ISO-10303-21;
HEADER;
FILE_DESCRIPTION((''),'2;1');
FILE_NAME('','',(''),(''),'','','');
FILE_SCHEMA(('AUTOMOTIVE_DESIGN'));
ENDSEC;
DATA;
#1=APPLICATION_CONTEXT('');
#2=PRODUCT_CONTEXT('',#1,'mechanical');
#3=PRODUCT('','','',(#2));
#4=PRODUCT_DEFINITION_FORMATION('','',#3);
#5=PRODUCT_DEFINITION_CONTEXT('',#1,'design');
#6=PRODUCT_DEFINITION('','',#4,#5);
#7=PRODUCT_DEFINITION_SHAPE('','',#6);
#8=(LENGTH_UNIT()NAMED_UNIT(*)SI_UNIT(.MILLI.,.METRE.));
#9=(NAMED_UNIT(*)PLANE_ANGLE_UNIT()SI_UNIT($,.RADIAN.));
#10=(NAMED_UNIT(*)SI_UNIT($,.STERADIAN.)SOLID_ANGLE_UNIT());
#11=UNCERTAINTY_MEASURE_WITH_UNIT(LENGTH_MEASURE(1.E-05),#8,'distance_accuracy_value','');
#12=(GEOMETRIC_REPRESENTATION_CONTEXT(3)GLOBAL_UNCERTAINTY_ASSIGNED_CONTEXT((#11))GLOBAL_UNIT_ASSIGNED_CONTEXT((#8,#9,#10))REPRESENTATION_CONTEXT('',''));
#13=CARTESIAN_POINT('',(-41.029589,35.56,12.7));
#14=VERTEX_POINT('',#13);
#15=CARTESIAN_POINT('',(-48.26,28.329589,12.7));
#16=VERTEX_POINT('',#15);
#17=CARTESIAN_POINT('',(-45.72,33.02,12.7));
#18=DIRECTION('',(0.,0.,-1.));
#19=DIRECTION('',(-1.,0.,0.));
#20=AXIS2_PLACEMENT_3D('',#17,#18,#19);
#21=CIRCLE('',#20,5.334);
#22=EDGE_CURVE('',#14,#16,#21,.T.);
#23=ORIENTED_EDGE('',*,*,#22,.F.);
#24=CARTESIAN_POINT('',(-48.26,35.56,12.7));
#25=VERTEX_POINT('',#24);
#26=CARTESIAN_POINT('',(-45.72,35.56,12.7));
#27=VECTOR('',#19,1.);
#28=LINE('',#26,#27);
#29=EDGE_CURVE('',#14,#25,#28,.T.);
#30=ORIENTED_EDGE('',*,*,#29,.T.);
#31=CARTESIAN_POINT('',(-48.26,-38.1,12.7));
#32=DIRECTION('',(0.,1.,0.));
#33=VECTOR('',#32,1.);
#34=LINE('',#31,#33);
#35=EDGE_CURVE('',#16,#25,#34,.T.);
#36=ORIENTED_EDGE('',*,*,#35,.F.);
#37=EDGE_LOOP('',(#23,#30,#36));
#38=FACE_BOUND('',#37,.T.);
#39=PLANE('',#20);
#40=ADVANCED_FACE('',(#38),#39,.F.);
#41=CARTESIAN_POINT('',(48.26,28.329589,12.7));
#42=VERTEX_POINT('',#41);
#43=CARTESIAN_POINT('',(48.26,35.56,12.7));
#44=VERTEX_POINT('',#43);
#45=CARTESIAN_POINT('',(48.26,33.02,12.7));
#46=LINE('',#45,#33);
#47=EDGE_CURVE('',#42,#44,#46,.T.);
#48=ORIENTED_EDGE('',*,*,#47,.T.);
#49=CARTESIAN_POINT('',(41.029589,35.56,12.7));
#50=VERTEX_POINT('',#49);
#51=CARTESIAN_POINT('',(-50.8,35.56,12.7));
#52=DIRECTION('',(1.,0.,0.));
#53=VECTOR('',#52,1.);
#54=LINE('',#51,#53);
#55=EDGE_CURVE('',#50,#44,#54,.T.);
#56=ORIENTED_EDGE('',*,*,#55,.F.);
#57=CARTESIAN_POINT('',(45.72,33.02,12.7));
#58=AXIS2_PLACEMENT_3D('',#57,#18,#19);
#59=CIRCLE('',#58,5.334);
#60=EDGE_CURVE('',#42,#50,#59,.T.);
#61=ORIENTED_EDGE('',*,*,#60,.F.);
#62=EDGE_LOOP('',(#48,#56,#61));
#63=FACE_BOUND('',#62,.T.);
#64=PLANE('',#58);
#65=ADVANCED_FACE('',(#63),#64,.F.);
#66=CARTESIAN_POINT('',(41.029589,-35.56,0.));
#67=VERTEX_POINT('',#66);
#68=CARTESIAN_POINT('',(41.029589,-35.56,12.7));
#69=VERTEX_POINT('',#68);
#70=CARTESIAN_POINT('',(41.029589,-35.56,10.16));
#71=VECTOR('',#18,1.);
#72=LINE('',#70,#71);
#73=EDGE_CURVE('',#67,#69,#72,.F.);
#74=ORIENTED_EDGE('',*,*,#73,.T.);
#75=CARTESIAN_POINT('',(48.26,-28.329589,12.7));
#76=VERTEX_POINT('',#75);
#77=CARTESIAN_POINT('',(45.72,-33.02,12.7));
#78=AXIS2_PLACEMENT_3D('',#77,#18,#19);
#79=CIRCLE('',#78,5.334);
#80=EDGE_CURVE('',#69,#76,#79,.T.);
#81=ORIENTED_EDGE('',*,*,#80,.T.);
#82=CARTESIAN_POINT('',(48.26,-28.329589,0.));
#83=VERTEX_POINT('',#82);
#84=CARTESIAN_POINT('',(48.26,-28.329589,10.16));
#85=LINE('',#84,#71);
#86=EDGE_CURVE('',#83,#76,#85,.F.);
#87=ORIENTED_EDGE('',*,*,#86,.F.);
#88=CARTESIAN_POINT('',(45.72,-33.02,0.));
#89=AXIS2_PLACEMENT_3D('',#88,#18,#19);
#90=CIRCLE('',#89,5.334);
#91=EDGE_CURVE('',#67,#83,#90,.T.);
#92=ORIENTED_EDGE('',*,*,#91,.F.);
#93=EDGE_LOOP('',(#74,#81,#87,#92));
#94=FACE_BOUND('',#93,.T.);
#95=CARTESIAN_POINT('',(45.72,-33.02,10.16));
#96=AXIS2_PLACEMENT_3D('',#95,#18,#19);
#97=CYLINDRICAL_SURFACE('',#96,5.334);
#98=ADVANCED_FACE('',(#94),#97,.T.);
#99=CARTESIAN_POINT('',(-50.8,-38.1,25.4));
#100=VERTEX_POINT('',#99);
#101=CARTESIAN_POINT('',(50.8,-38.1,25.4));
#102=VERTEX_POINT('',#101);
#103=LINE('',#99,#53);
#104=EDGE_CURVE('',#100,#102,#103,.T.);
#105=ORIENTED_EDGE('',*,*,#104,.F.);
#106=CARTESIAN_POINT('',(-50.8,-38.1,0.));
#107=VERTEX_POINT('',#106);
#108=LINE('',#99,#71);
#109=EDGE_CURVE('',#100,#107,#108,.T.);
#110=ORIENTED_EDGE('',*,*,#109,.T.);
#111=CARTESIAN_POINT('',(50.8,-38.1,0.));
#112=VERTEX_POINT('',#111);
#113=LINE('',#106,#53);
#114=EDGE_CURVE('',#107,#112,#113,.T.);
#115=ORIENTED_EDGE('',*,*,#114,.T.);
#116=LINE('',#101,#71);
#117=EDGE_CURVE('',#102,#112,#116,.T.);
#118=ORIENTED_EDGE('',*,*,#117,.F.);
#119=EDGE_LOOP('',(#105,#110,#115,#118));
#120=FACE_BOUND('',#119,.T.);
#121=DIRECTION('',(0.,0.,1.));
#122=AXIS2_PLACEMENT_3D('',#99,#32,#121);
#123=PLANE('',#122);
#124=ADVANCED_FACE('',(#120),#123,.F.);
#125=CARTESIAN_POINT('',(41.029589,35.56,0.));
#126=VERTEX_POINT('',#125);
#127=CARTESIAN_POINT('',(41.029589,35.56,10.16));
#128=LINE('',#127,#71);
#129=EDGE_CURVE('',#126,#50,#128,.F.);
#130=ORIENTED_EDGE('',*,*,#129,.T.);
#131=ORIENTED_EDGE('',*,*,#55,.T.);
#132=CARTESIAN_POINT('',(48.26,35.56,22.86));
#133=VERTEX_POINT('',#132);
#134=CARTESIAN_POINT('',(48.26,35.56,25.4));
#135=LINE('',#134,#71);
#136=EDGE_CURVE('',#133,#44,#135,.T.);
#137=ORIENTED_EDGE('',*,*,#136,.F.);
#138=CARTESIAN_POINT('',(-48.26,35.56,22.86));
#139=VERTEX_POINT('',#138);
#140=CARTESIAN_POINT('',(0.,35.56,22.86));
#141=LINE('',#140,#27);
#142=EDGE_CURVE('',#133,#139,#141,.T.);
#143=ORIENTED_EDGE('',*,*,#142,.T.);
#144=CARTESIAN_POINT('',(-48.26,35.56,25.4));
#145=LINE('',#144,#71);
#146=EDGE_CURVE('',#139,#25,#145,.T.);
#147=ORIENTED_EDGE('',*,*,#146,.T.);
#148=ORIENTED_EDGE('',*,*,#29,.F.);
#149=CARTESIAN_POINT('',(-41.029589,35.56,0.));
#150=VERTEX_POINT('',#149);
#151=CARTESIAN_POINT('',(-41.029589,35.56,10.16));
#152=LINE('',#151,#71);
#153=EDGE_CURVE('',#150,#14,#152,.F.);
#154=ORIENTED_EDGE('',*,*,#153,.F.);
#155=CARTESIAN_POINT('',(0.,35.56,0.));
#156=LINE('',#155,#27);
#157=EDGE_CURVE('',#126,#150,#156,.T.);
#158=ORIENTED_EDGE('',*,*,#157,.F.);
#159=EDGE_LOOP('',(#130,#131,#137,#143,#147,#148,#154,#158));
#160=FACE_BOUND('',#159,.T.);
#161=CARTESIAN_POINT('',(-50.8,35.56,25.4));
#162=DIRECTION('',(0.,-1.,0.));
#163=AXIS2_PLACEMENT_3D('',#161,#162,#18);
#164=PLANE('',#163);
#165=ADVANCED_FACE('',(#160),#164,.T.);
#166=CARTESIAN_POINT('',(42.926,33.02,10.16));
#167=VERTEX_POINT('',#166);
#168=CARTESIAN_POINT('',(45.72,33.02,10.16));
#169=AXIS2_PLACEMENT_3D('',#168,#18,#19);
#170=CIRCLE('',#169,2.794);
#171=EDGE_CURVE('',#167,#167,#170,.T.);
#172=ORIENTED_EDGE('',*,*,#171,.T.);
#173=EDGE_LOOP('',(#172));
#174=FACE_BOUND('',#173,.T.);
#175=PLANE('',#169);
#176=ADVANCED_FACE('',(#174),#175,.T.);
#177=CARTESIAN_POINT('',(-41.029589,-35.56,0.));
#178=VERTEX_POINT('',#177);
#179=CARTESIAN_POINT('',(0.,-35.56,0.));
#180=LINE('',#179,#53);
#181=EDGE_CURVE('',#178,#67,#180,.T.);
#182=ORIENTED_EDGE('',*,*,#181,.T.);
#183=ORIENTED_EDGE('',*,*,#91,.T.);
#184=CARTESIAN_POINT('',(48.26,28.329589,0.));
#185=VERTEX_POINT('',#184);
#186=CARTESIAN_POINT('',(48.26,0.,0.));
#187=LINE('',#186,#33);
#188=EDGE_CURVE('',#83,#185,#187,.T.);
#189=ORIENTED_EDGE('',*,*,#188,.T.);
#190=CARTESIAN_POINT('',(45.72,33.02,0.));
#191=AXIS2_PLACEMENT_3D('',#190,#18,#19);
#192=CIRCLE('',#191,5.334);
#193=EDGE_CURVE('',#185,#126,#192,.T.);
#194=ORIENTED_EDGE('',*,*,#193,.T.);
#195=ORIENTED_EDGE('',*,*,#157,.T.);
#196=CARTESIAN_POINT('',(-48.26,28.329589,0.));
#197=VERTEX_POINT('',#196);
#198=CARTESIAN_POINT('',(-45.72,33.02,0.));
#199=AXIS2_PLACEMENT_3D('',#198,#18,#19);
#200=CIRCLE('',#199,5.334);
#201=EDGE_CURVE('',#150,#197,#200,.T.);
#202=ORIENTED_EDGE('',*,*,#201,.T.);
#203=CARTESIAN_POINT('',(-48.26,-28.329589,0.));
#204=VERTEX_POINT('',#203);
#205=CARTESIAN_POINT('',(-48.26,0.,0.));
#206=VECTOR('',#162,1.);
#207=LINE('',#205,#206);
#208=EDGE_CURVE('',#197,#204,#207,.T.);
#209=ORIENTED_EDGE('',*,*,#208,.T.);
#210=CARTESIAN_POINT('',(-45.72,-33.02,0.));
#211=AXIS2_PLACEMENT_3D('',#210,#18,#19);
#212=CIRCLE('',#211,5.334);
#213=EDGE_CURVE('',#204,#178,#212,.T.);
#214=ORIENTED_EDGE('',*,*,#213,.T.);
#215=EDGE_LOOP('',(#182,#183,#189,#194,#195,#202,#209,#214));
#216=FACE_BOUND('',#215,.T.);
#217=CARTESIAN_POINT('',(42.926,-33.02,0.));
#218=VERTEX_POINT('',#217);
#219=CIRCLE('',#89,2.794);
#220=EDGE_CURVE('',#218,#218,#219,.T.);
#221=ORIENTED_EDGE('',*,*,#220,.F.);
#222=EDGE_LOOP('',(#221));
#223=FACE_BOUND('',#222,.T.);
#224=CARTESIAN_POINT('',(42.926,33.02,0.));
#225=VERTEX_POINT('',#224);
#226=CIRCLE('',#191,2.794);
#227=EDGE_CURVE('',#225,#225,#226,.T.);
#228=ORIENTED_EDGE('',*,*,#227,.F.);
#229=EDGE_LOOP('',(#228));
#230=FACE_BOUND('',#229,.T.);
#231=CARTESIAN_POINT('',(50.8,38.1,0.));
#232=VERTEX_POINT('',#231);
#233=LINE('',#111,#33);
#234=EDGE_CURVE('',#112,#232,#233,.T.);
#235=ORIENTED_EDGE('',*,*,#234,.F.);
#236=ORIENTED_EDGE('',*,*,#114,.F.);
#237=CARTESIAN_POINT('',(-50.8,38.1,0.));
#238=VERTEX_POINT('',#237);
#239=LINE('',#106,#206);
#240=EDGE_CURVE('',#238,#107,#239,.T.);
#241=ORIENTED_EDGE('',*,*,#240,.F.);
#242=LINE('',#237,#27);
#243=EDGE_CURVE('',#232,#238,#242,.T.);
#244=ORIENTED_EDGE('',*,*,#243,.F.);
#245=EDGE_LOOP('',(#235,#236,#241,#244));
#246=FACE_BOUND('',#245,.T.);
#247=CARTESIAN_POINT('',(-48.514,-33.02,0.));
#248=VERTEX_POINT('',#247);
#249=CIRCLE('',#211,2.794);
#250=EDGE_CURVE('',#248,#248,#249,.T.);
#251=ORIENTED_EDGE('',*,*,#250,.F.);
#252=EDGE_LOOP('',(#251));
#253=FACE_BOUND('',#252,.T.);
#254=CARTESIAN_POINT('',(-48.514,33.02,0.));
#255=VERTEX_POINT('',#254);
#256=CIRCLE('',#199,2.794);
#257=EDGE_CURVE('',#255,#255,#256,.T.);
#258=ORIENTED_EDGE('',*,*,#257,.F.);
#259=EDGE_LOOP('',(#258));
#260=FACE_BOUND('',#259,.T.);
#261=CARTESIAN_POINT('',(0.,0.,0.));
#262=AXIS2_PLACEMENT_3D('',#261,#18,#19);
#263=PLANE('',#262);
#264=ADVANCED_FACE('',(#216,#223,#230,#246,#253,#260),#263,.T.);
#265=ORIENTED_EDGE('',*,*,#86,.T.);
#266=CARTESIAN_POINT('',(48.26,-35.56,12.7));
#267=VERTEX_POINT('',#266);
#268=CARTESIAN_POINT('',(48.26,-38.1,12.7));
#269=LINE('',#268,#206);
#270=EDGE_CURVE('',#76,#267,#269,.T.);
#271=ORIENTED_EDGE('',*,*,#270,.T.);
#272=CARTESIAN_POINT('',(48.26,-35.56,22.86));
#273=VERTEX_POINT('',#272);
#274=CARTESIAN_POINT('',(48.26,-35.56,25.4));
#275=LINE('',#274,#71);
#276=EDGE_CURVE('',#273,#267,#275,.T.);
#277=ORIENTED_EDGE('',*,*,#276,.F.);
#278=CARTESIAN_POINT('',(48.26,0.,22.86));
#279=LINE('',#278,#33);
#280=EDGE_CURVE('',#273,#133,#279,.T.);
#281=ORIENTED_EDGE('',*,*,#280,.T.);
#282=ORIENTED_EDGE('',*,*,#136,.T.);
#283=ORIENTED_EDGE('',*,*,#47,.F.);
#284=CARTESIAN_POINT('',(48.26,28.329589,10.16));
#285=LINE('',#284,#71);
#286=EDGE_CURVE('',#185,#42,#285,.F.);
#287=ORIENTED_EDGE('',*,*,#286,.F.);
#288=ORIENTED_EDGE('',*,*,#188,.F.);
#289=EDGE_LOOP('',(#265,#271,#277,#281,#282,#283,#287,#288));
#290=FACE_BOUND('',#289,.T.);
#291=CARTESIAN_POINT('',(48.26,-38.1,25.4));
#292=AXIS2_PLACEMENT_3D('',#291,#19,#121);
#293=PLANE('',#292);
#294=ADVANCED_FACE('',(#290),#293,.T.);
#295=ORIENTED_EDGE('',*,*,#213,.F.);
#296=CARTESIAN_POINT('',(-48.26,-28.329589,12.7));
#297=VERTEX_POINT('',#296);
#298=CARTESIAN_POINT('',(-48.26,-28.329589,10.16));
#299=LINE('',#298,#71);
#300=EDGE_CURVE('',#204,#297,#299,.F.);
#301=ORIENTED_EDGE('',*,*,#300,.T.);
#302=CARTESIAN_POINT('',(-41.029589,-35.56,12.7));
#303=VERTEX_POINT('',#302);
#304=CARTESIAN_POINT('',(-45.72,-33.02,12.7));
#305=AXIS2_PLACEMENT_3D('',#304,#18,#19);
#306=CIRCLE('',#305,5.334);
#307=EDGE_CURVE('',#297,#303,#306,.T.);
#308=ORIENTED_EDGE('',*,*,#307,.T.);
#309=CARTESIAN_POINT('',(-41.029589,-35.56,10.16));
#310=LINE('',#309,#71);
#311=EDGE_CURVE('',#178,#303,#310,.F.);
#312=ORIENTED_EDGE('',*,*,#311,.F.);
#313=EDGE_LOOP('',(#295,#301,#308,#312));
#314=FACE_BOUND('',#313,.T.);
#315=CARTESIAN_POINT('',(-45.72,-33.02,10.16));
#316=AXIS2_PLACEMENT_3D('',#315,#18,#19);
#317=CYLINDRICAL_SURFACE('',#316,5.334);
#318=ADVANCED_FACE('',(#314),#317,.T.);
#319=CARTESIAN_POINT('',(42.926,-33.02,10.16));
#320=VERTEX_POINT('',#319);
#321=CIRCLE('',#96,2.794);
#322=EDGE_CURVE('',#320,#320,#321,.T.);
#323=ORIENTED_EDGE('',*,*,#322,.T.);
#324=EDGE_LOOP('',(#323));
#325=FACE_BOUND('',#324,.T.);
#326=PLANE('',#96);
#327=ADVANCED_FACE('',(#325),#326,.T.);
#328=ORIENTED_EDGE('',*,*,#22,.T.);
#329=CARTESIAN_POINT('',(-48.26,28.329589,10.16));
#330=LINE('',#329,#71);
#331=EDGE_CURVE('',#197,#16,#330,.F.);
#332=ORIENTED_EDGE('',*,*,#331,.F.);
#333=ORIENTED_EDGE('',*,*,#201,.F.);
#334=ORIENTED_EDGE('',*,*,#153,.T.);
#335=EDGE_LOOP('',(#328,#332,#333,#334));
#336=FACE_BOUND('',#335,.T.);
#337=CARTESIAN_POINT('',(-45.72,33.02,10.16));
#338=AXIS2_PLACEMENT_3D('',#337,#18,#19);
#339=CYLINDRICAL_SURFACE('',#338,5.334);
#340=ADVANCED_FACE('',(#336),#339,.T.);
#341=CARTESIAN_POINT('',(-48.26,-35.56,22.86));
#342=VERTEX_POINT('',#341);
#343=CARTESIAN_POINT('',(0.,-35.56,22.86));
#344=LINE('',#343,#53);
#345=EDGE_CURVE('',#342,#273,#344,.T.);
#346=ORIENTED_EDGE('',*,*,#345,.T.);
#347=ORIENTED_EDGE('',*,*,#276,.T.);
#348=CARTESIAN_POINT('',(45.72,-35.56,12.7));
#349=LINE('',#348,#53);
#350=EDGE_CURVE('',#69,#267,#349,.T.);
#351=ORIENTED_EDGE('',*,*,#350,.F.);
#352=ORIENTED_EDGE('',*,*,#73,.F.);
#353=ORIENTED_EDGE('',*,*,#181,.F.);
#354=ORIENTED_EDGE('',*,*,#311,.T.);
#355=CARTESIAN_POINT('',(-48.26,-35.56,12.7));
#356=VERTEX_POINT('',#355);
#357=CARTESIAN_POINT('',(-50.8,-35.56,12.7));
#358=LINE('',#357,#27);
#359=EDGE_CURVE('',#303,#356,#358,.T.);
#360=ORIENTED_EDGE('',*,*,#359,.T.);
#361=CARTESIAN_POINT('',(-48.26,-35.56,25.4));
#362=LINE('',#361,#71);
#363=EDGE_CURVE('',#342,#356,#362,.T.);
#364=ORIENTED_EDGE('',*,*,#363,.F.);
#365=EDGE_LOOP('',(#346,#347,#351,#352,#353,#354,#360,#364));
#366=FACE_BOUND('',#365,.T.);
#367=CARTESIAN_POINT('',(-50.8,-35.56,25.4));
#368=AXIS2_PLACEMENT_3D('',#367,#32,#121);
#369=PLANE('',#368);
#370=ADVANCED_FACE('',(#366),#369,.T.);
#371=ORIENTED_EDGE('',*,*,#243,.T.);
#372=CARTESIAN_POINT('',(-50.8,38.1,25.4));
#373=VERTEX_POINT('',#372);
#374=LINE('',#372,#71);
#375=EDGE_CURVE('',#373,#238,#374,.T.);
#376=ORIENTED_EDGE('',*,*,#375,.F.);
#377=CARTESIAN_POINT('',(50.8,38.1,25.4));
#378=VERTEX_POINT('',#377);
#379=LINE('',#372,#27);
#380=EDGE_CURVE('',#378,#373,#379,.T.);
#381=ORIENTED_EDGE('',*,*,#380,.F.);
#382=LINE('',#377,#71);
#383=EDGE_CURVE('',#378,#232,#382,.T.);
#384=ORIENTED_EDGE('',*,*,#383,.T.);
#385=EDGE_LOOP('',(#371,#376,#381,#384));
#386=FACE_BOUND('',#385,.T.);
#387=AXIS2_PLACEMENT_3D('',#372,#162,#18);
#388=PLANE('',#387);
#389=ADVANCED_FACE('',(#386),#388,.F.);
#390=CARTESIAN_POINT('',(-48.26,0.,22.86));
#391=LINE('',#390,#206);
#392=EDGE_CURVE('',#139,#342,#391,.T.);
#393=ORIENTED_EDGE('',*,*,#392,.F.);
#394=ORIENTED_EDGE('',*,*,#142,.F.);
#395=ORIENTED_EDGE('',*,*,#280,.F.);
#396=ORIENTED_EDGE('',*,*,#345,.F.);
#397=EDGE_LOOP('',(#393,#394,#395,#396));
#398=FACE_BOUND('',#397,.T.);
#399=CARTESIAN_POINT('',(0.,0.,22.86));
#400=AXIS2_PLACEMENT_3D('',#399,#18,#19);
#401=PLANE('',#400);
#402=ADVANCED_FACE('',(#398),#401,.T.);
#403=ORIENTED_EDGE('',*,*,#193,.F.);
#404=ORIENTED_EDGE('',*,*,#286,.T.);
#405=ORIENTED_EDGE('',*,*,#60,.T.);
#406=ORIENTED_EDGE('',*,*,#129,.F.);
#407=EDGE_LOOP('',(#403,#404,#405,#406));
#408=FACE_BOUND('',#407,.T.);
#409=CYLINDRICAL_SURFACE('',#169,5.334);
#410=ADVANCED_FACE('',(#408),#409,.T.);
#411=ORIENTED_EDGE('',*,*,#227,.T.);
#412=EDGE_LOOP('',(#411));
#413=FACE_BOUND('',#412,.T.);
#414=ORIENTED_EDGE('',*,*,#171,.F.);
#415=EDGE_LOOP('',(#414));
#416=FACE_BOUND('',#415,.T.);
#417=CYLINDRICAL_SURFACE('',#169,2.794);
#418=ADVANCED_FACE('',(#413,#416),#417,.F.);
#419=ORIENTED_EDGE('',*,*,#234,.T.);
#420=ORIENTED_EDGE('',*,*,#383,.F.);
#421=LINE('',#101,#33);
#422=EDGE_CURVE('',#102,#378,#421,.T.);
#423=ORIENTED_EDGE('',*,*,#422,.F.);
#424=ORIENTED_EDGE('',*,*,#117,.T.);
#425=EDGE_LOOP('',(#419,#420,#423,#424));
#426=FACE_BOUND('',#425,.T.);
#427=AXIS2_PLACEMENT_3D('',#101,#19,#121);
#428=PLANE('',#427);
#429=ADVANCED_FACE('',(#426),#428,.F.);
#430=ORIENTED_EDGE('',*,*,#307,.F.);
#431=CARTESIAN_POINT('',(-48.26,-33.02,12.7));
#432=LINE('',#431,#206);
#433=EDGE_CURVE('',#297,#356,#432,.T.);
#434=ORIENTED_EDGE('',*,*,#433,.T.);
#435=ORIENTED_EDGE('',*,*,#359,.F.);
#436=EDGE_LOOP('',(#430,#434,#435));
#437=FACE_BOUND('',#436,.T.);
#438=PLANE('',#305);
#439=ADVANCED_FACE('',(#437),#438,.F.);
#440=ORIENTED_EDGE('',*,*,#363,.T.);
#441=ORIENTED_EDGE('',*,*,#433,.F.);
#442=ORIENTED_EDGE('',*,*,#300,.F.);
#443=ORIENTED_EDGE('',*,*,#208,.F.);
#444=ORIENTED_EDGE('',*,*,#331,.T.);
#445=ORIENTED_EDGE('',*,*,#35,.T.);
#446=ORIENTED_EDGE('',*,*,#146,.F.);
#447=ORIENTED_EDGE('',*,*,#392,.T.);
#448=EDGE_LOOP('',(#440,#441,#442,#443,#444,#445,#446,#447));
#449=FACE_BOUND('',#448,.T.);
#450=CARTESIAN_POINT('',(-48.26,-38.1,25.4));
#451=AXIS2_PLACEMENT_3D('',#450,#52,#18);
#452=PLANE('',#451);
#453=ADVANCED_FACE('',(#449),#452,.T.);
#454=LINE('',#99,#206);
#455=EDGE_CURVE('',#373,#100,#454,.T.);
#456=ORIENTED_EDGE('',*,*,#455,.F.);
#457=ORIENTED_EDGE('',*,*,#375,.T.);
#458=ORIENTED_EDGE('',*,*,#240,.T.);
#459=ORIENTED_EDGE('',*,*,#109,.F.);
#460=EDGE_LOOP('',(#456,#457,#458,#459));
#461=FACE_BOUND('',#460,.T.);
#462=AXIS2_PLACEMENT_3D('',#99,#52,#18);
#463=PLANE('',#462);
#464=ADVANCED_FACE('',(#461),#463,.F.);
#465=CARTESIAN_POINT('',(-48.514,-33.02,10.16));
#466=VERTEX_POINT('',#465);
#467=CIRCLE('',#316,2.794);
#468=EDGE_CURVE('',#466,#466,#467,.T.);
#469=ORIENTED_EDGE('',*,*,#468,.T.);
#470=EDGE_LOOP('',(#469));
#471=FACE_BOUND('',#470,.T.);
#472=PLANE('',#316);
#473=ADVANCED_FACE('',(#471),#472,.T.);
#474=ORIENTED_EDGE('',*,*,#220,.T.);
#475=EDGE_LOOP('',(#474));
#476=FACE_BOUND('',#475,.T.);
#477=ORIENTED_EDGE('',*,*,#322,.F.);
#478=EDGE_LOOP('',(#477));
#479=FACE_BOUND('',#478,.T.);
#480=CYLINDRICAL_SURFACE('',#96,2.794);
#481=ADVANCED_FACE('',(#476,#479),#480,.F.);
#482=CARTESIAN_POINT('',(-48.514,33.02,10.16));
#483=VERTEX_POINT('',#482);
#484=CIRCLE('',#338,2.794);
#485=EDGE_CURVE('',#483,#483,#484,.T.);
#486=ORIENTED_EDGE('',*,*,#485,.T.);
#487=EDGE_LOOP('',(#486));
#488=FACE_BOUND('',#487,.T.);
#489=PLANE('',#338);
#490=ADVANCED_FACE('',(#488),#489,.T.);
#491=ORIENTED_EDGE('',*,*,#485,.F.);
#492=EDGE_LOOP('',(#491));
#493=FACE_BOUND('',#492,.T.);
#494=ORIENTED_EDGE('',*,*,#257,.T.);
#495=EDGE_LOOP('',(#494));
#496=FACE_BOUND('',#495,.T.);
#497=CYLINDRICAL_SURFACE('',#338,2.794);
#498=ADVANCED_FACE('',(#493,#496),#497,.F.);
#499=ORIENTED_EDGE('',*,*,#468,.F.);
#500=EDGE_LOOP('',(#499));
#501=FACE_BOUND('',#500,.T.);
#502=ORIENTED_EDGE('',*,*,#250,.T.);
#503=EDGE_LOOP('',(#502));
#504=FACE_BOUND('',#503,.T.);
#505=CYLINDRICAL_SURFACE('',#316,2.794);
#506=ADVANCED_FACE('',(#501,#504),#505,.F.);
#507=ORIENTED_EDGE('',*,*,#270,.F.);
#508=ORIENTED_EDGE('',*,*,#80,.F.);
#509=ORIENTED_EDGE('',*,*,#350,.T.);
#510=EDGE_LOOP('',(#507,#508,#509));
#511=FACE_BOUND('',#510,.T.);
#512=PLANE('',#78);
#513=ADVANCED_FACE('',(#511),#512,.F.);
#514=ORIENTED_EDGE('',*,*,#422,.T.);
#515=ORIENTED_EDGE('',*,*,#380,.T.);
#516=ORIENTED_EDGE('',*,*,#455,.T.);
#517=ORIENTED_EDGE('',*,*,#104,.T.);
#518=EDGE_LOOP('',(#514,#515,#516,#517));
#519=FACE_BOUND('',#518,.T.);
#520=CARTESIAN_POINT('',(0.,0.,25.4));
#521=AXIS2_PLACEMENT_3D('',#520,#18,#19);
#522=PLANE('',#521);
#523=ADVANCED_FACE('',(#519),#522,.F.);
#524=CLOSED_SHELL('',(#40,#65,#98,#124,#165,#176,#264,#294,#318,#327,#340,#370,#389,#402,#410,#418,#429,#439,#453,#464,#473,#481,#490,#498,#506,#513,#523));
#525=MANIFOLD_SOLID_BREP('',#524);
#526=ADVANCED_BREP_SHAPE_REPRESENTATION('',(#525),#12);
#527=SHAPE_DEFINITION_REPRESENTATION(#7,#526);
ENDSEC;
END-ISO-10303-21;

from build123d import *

# Parameters (mm, degrees)
SKETCH1_W           = 101.6
SKETCH1_H           = 76.2
BOSS_EXTRUDE1_DEPTH = 25.4
SKETCH2_R           = 2.794
CUT_EXTRUDE1_DEPTH  = 10.16
SHELL1_DEPTH        = 22.86
SHELL1_START        = 12.7
SHELL1_2_DEPTH      = 10.16


# Read off the part's stored shape, not the designer's step: Shell1
with BuildPart() as part:
    # Sketch1 → Boss-Extrude1 (new body)
    with BuildSketch(Plane.XY):
        Rectangle(SKETCH1_W, SKETCH1_H)
    extrude(amount=BOSS_EXTRUDE1_DEPTH)

    # Sketch2 → Cut-Extrude1 (cut)
    with BuildSketch(Plane(origin=(0, 0, 0), x_dir=(-1, 0, 0), z_dir=(0, 0, -1))):
        with Locations((45.72, -33.02)):
            Circle(SKETCH2_R)
        with Locations((-45.72, -33.02)):
            Circle(SKETCH2_R)
        with Locations((-45.72, 33.02)):
            Circle(SKETCH2_R)
        with Locations((45.72, 33.02)):
            Circle(SKETCH2_R)
    extrude(amount=-CUT_EXTRUDE1_DEPTH, mode=Mode.SUBTRACT)

    # Shell1 outline → Shell1 (cut)
    with BuildSketch(Plane.XY):
        with BuildLine():
            Line((41.029588931, 35.56), (-41.029588931, 35.56))
            ThreePointArc((-41.029588931, 35.56), (-41.948292429, 29.248292429), (-48.26, 28.329588931))
            Line((-48.26, 28.329588931), (-48.26, -28.329588931))
            ThreePointArc((-48.26, -28.329588931), (-41.948292429, -29.248292429), (-41.029588931, -35.56))
            Line((-41.029588931, -35.56), (41.029588931, -35.56))
            ThreePointArc((41.029588931, -35.56), (41.948292429, -29.248292429), (48.26, -28.329588931))
            Line((48.26, -28.329588931), (48.26, 28.329588931))
            ThreePointArc((48.26, 28.329588931), (41.948292429, 29.248292429), (41.029588931, 35.56))
        make_face()
    extrude(amount=SHELL1_DEPTH, mode=Mode.SUBTRACT)

    # Shell1 2 outline → Shell1 2 (cut)
    with BuildSketch(Plane.XY.offset(SHELL1_START)):
        with BuildLine():
            Line((-41.029588931, 35.56), (-48.26, 35.56))
            Line((-48.26, 35.56), (-48.26, 28.329588931))
            ThreePointArc((-48.26, 28.329588931), (-41.948292429, 29.248292429), (-41.029588931, 35.56))
        make_face()
        with BuildLine():
            Line((48.26, 35.56), (41.029588931, 35.56))
            ThreePointArc((41.029588931, 35.56), (41.948292429, 29.248292429), (48.26, 28.329588931))
            Line((48.26, 28.329588931), (48.26, 35.56))
        make_face()
        with BuildLine():
            ThreePointArc((-41.029588931, -35.56), (-41.948292429, -29.248292429), (-48.26, -28.329588931))
            Line((-48.26, -28.329588931), (-48.26, -35.56))
            Line((-48.26, -35.56), (-41.029588931, -35.56))
        make_face()
        with BuildLine():
            Line((48.26, -35.56), (48.26, -28.329588931))
            ThreePointArc((48.26, -28.329588931), (41.948292429, -29.248292429), (41.029588931, -35.56))
            Line((41.029588931, -35.56), (48.26, -35.56))
        make_face()
    extrude(amount=SHELL1_2_DEPTH, mode=Mode.SUBTRACT)


solid = part.part
